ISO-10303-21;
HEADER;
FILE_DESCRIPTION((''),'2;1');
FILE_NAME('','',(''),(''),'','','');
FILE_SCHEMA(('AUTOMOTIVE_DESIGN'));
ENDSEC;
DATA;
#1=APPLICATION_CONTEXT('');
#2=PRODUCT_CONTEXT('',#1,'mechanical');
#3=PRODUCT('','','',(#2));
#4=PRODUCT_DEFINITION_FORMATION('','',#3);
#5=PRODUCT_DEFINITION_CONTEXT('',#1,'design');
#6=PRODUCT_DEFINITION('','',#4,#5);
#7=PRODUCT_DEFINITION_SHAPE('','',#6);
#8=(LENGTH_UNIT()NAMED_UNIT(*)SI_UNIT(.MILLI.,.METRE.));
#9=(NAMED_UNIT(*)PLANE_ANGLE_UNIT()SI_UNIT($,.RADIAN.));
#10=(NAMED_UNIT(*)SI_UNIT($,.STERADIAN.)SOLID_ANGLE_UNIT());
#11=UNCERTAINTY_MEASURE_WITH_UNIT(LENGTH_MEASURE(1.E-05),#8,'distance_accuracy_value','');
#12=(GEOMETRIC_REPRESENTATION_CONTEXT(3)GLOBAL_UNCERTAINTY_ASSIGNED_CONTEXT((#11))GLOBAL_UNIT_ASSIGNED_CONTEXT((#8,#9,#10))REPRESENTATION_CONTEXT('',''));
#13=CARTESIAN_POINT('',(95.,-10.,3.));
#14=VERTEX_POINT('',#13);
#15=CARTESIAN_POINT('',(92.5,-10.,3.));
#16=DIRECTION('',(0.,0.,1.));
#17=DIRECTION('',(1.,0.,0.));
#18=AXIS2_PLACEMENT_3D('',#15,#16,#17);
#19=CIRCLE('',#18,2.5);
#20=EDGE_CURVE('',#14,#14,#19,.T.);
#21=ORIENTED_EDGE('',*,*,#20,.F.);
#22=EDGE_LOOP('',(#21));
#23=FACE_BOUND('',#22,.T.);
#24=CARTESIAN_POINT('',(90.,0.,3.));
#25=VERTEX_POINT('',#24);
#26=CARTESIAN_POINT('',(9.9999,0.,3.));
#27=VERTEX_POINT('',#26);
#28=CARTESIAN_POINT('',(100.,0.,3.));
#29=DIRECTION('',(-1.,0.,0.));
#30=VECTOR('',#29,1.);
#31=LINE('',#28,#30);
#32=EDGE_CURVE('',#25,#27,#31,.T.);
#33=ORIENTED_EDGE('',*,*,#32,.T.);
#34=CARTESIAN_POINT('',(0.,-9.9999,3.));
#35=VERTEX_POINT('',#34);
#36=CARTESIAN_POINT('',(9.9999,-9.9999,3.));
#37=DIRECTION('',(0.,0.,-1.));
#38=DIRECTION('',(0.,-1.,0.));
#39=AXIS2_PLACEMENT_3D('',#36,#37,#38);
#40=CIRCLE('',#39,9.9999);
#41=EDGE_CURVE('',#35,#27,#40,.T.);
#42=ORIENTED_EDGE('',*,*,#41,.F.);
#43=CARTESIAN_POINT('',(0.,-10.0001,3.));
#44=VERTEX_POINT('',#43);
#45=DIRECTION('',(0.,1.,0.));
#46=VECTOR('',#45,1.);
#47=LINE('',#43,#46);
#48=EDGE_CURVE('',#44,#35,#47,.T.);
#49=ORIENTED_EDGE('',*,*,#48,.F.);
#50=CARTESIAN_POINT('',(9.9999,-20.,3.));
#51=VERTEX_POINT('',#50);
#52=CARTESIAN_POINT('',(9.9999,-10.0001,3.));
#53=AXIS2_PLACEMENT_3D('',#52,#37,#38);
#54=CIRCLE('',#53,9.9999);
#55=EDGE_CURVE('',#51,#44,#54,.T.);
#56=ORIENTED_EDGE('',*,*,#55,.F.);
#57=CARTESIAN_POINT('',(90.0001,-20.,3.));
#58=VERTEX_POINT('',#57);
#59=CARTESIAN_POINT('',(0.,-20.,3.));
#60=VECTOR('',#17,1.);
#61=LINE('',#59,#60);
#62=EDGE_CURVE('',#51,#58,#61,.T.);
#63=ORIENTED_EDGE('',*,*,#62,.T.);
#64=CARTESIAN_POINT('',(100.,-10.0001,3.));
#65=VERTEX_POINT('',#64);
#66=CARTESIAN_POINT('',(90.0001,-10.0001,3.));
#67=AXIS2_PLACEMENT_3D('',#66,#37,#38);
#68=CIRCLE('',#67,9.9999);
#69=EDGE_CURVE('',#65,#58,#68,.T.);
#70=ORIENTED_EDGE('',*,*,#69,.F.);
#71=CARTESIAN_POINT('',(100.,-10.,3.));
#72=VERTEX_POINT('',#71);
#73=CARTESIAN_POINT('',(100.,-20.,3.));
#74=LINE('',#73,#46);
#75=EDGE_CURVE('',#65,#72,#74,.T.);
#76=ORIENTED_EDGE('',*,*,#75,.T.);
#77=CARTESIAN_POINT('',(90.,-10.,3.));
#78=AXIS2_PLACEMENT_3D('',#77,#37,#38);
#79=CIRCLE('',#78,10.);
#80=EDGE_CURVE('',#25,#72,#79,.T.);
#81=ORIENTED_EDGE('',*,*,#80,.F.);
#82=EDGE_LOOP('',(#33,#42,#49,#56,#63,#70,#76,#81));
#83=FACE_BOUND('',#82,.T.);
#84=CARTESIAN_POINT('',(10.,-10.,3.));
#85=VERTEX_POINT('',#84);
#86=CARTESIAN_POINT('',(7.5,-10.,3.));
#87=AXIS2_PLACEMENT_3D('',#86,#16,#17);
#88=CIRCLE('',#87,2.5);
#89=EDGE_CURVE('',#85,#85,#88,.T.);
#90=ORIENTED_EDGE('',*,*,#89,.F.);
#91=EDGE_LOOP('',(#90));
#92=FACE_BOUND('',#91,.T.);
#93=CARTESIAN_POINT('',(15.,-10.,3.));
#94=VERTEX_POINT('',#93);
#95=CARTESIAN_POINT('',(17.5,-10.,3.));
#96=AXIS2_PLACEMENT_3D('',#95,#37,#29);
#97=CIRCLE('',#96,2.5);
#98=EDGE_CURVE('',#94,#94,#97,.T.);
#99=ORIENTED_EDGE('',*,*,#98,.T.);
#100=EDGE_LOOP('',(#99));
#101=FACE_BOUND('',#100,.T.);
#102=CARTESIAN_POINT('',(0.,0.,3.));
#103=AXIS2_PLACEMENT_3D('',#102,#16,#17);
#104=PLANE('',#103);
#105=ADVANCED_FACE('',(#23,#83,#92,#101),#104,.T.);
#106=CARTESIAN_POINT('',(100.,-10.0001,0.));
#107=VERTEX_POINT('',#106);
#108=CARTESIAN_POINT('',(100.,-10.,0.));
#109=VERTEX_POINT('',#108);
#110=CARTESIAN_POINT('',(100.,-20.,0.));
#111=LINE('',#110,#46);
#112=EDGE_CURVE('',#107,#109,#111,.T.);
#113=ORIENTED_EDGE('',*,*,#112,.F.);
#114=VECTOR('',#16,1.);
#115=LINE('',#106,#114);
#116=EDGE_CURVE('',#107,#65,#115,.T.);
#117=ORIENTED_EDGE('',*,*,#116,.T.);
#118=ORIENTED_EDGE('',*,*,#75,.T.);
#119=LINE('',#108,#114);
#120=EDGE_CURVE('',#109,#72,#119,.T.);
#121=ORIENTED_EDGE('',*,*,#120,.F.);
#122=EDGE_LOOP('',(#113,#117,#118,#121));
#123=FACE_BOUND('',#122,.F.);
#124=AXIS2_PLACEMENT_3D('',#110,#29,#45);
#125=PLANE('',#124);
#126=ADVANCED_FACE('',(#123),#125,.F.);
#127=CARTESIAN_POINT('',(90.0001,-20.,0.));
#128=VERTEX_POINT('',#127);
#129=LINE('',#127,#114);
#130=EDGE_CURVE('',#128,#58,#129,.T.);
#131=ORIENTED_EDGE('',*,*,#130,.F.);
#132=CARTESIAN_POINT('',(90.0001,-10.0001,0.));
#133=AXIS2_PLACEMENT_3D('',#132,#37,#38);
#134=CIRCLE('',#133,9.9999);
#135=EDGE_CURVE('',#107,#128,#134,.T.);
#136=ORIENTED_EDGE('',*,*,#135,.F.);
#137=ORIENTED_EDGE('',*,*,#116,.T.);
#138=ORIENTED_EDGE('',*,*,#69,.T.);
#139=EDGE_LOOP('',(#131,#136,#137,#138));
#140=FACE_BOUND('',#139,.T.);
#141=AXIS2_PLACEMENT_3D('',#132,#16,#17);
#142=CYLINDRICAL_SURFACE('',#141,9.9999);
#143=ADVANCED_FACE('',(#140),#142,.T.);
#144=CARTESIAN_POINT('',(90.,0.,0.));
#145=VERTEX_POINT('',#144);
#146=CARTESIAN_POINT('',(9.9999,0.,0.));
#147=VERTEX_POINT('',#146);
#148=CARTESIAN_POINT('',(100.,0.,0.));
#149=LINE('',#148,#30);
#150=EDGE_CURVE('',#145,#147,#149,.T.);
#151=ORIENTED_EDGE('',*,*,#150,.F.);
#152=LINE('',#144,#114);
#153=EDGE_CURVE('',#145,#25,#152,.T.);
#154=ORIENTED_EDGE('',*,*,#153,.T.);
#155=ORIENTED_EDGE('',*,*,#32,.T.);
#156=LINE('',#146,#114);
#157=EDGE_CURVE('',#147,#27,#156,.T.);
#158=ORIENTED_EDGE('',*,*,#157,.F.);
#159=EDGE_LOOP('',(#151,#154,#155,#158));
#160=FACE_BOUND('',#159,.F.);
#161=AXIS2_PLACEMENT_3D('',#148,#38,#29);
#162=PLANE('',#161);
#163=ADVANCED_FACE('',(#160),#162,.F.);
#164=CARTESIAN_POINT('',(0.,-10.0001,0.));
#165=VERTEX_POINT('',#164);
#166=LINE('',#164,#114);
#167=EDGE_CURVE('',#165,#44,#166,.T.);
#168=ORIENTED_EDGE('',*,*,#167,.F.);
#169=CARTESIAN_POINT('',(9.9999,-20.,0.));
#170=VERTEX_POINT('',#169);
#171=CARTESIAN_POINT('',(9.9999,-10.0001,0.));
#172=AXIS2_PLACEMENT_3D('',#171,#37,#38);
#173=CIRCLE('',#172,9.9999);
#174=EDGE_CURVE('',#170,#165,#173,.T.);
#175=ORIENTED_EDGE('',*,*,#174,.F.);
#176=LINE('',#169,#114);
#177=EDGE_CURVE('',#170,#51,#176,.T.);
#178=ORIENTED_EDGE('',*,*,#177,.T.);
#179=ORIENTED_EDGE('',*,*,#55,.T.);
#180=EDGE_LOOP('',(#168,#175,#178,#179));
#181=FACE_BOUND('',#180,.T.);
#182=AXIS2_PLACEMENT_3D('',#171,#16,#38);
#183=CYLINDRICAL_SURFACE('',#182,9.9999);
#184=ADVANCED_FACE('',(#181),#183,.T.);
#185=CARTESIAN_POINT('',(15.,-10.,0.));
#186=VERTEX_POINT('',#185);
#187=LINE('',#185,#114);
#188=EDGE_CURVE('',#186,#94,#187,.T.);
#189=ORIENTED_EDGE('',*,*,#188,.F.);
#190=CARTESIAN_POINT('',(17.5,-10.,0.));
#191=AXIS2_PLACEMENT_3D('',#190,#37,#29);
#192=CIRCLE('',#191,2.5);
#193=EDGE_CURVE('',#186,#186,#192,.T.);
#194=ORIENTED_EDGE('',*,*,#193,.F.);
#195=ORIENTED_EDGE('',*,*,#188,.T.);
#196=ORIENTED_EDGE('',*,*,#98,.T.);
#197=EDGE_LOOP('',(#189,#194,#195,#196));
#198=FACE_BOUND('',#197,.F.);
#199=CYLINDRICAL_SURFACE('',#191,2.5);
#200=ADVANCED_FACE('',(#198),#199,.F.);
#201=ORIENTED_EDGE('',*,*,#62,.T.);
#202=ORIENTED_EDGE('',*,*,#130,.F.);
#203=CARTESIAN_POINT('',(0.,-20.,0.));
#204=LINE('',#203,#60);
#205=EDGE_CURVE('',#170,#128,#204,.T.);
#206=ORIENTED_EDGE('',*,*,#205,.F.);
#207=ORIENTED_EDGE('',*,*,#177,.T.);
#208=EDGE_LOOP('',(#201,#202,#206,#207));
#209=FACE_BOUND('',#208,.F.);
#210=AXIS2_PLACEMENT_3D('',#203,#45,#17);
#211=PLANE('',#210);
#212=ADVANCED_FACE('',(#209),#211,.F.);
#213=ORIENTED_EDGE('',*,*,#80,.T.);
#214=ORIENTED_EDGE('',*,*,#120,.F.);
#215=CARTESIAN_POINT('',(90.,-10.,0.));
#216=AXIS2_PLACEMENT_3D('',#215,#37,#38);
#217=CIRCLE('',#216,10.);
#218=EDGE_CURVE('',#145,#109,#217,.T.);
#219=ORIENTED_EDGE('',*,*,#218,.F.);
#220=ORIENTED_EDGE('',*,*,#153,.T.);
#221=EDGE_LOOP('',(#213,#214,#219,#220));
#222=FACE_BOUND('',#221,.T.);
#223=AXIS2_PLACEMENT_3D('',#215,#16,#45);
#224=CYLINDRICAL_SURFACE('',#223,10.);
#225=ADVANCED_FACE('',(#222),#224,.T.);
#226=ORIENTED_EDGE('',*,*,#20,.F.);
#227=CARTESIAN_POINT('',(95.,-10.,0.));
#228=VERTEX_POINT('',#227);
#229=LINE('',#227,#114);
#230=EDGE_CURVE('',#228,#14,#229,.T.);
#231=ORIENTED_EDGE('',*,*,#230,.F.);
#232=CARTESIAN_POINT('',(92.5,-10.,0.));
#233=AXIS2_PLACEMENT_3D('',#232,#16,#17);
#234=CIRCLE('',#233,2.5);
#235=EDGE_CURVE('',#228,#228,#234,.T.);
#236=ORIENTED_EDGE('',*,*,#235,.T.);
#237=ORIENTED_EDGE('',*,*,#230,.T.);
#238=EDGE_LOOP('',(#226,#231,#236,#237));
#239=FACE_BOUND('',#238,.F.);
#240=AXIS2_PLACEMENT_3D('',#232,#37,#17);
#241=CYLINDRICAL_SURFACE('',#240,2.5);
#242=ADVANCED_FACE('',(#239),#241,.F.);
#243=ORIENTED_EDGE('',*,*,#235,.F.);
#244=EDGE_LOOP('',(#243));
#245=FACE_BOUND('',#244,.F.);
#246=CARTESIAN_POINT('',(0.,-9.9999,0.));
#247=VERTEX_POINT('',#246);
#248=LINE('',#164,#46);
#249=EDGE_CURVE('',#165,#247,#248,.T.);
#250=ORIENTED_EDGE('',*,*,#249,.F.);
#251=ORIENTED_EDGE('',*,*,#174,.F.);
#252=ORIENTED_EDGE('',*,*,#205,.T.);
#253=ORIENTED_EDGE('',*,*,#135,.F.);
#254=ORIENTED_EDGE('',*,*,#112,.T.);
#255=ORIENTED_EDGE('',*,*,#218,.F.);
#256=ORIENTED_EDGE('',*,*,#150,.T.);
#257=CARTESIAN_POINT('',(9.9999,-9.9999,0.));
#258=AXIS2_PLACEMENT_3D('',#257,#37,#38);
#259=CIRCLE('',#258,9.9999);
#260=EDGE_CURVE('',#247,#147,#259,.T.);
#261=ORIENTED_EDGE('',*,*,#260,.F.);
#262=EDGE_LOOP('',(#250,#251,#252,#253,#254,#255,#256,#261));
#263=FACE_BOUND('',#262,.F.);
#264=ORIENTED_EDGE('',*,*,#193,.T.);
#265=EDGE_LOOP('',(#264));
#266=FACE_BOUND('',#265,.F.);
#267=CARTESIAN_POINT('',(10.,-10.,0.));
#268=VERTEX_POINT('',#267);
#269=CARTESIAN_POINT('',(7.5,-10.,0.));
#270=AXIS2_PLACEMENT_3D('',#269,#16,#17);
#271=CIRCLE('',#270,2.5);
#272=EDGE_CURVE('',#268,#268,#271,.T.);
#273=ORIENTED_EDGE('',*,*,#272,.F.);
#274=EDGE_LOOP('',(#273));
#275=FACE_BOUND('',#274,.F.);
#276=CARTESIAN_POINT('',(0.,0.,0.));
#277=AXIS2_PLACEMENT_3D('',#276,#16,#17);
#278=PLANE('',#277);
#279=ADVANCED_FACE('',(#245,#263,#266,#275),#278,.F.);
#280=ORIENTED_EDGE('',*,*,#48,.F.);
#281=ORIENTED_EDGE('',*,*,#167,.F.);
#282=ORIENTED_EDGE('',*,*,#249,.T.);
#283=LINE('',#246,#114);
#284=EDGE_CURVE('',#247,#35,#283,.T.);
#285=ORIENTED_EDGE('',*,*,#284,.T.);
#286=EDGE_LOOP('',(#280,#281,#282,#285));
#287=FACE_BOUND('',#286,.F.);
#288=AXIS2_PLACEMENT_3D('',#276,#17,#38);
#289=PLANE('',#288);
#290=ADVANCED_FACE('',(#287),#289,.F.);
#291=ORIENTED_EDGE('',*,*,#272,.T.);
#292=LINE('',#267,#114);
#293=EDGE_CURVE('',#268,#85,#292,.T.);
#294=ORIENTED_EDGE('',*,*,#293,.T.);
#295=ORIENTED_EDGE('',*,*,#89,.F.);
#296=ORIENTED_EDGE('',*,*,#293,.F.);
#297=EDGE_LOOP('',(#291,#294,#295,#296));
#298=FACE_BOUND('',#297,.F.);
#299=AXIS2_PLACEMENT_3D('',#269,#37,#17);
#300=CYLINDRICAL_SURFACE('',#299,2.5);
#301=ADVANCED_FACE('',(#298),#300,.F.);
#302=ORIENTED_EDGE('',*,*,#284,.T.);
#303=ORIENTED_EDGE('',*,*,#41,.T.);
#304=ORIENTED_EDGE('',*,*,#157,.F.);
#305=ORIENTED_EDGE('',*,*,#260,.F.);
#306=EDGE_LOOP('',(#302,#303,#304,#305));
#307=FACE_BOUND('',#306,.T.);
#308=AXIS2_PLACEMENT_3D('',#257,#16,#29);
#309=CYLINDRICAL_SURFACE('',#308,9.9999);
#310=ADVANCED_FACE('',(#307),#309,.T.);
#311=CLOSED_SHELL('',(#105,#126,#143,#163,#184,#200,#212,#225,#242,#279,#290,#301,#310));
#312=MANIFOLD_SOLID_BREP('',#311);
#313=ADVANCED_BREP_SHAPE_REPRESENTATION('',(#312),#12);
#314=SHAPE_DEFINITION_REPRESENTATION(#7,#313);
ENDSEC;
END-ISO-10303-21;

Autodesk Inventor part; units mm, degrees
ref_plane "YZ Plane" through (0, 0, 0) normal (1, 0, 0) x (0, 1, 0)
ref_plane "XZ Plane" through (0, 0, 0) normal (0, 1, 0) x (-1, 0, 0)
ref_plane "XY Plane" through (0, 0, 0) normal (0, 0, 1) x (1, 0, 0)
sketch "Sketch1" plane through (0, 0, 0) normal (0, 0, 1) x (1, 0, 0)
  line L0 (0, 0) -> (0, -20)
  line L1 (0, -20) -> (100, -20)
  line L2 (100, -20) -> (100, 0)
  line L3 (100, 0) -> (0, 0)
  line L4 (0, 0) -> (0, -10)
  line L5 (0, -10) -> (7.5, -10)
  circle A0 centre (7.5, -10) radius 2.5
  circle A1 centre (92.5, -10) radius 2.5
  dimension "d2" = 10
  dimension "d3" = 7.5
  dimension "d4" = 5
  dimension "d5" = 5
  dimension "d6" = 7.5
extrude "Extrusion1" add sketch "Sketch1" along normal blind 3
fillet "Fillet1" radius 10 1 edges at (100, 0, 1.5)
fillet "Fillet2" radius 10 1 edges at (100, -20, 1.5)
fillet "Fillet3" radius 10 1 edges at (0, -20, 1.5)
fillet "Fillet4" radius 10 1 edges at (0, 0, 1.5)
sketch "Sketch2" plane through (0, 0, 0) normal (0, 0, -1) x (-1, 0, 0)
  circle A0 centre (-7.5, -10) radius 2.5 projected
  circle A1 centre (-17.5, -10) radius 2.5
  point P0 (0, 0)
extrude "Extrusion2" cut sketch "Sketch2" against normal through all contours A1
properties part number "new acr connect" material "Glass"
